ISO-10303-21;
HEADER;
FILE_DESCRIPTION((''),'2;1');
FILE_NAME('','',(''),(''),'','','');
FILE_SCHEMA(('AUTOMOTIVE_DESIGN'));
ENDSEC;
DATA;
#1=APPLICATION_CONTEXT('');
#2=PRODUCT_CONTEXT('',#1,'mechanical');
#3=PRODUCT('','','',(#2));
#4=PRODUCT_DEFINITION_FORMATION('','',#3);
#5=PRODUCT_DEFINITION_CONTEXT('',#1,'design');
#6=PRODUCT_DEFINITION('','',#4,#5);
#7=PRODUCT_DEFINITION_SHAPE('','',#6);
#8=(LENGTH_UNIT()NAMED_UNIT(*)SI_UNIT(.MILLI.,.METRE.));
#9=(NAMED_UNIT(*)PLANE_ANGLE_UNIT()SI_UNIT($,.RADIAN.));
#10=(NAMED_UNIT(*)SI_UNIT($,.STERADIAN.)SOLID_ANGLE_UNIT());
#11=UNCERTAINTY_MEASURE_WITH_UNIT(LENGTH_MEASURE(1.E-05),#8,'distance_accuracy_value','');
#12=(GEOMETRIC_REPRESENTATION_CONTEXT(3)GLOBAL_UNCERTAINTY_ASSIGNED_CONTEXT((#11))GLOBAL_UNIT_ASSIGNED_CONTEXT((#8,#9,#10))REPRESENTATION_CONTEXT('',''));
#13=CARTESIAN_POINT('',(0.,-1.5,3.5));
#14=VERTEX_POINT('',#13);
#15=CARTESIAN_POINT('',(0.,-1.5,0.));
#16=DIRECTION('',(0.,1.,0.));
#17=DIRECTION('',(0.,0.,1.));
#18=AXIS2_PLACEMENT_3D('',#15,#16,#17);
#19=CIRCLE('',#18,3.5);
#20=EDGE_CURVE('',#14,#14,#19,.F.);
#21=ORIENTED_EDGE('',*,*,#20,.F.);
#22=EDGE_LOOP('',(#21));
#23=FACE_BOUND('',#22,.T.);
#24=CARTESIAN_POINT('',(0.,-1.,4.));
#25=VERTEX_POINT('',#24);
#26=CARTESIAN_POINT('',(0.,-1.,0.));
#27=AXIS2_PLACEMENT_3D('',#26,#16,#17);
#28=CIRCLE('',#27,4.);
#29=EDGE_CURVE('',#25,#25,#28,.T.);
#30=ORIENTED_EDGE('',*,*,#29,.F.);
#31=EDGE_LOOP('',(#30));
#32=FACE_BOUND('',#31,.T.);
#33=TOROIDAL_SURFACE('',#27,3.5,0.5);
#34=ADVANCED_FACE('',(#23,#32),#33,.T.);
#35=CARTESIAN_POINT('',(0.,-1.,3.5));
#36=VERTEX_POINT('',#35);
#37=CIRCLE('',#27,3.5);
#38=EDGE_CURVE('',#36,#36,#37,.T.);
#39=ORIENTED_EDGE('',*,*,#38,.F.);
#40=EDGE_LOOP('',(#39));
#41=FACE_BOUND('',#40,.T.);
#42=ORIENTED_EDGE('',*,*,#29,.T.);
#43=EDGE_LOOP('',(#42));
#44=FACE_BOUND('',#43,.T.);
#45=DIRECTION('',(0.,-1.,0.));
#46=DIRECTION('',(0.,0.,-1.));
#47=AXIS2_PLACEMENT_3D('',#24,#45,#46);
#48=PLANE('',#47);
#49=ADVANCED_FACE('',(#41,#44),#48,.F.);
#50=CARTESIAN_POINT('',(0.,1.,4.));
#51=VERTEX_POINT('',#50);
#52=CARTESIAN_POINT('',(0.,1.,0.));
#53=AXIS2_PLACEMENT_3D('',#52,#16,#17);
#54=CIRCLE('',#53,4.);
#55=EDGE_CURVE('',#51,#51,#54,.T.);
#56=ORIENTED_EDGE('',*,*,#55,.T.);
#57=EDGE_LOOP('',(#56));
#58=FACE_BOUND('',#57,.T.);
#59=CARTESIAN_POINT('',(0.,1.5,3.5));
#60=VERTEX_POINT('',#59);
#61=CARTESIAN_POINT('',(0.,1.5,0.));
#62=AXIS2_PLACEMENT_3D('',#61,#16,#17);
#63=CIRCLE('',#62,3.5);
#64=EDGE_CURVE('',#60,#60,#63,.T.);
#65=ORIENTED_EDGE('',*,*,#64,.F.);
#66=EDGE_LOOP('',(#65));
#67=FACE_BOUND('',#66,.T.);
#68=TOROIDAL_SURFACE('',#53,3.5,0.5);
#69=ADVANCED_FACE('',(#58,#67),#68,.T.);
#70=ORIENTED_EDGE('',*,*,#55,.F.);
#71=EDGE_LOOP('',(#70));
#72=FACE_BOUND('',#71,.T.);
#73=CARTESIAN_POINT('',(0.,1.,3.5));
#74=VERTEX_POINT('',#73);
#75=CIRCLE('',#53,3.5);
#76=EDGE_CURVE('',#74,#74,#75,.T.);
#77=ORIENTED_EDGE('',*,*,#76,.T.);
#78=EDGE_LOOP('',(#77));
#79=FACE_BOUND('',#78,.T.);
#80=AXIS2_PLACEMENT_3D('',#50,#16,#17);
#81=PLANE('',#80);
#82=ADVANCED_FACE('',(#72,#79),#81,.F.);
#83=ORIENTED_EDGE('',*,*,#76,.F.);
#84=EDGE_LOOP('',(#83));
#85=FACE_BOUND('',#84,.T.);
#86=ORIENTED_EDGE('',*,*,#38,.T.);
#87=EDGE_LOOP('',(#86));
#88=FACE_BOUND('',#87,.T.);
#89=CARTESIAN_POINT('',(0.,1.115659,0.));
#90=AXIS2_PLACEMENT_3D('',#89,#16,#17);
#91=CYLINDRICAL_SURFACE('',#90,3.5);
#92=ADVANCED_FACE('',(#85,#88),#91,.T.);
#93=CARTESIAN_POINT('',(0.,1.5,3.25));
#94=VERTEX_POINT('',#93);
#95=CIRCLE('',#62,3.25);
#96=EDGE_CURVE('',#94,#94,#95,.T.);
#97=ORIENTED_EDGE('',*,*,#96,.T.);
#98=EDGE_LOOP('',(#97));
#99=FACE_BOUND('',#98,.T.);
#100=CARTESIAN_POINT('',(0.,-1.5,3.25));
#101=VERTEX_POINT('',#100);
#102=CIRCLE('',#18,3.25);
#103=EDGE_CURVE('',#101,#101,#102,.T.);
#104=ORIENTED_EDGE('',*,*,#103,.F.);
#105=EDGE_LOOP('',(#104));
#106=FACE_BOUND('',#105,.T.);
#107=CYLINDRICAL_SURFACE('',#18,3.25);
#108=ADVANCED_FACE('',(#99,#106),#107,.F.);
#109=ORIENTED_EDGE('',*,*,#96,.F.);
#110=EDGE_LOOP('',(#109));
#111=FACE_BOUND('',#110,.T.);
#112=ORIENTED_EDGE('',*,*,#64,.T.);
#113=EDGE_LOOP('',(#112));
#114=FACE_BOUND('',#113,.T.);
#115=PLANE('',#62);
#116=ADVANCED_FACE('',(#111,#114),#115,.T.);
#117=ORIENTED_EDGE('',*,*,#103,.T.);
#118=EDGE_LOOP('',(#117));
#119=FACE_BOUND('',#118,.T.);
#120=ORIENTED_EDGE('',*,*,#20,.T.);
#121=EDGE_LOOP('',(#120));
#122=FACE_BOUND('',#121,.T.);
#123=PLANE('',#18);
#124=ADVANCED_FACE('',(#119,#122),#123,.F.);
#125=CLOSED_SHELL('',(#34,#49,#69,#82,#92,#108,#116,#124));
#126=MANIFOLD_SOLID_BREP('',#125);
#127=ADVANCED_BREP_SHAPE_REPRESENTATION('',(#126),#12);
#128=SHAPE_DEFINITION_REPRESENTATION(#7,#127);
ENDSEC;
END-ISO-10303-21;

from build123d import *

# Parameters (mm, degrees)
SKETCH1_R               = 4
BOSS_EXTRUDE1_DEPTH     = 1.5
CUT_EXTRUDE1_DEPTH      = 6.852349955
CUT_EXTRUDE1_DEPTH_BACK = 6.852349955
SKETCH2_R               = 3.25
SKETCH4_W               = 0.5
SKETCH4_H               = 2
FILLET1_R               = 0.5


with BuildPart() as part:
    # Sketch1 → Boss-Extrude1 (new, symmetric)
    with BuildSketch(Plane(origin=(0, 0, 0), x_dir=(1, 0, 0), z_dir=(0, 1, 0))):
        with Locations(Location((0, 0, 0), (0, 0, 270))):
            Circle(SKETCH1_R)
    extrude(amount=BOSS_EXTRUDE1_DEPTH, both=True)

    # Sketch2 → Cut-Extrude1 (cut, two sides: drawn at the far end of the back side and taken through both)
    with BuildSketch(Plane(origin=(0, 0, 0), x_dir=(1, 0, 0), z_dir=(0, 1, 0)).offset(-CUT_EXTRUDE1_DEPTH_BACK)):
        with Locations(Location((0, 0, 0), (0, 0, 270))):
            Circle(SKETCH2_R)
    extrude(amount=CUT_EXTRUDE1_DEPTH + CUT_EXTRUDE1_DEPTH_BACK, mode=Mode.SUBTRACT)

    # Sketch4 → Cut-Revolve1 (revolve, cut)
    with BuildSketch(Plane(origin=(0, 0, 0), x_dir=(0, 0, -1), z_dir=(1, 0, 0))):
        with Locations((-3.75, 0)):
            Rectangle(SKETCH4_W, SKETCH4_H)
    revolve(axis=Axis((0, 1.1156594, 0), (0, -1, 0)), mode=Mode.SUBTRACT)

    # Fillet1
    fillet1_edges = [part.edges().sort_by_distance(p)[0] for p in [
        (0, -1.5, -4),
        (0, 1.5, -4),
    ]]
    fillet(fillet1_edges, radius=FILLET1_R - 0.0001)  # a hair under: the kernel refuses the full size


solid = part.part
